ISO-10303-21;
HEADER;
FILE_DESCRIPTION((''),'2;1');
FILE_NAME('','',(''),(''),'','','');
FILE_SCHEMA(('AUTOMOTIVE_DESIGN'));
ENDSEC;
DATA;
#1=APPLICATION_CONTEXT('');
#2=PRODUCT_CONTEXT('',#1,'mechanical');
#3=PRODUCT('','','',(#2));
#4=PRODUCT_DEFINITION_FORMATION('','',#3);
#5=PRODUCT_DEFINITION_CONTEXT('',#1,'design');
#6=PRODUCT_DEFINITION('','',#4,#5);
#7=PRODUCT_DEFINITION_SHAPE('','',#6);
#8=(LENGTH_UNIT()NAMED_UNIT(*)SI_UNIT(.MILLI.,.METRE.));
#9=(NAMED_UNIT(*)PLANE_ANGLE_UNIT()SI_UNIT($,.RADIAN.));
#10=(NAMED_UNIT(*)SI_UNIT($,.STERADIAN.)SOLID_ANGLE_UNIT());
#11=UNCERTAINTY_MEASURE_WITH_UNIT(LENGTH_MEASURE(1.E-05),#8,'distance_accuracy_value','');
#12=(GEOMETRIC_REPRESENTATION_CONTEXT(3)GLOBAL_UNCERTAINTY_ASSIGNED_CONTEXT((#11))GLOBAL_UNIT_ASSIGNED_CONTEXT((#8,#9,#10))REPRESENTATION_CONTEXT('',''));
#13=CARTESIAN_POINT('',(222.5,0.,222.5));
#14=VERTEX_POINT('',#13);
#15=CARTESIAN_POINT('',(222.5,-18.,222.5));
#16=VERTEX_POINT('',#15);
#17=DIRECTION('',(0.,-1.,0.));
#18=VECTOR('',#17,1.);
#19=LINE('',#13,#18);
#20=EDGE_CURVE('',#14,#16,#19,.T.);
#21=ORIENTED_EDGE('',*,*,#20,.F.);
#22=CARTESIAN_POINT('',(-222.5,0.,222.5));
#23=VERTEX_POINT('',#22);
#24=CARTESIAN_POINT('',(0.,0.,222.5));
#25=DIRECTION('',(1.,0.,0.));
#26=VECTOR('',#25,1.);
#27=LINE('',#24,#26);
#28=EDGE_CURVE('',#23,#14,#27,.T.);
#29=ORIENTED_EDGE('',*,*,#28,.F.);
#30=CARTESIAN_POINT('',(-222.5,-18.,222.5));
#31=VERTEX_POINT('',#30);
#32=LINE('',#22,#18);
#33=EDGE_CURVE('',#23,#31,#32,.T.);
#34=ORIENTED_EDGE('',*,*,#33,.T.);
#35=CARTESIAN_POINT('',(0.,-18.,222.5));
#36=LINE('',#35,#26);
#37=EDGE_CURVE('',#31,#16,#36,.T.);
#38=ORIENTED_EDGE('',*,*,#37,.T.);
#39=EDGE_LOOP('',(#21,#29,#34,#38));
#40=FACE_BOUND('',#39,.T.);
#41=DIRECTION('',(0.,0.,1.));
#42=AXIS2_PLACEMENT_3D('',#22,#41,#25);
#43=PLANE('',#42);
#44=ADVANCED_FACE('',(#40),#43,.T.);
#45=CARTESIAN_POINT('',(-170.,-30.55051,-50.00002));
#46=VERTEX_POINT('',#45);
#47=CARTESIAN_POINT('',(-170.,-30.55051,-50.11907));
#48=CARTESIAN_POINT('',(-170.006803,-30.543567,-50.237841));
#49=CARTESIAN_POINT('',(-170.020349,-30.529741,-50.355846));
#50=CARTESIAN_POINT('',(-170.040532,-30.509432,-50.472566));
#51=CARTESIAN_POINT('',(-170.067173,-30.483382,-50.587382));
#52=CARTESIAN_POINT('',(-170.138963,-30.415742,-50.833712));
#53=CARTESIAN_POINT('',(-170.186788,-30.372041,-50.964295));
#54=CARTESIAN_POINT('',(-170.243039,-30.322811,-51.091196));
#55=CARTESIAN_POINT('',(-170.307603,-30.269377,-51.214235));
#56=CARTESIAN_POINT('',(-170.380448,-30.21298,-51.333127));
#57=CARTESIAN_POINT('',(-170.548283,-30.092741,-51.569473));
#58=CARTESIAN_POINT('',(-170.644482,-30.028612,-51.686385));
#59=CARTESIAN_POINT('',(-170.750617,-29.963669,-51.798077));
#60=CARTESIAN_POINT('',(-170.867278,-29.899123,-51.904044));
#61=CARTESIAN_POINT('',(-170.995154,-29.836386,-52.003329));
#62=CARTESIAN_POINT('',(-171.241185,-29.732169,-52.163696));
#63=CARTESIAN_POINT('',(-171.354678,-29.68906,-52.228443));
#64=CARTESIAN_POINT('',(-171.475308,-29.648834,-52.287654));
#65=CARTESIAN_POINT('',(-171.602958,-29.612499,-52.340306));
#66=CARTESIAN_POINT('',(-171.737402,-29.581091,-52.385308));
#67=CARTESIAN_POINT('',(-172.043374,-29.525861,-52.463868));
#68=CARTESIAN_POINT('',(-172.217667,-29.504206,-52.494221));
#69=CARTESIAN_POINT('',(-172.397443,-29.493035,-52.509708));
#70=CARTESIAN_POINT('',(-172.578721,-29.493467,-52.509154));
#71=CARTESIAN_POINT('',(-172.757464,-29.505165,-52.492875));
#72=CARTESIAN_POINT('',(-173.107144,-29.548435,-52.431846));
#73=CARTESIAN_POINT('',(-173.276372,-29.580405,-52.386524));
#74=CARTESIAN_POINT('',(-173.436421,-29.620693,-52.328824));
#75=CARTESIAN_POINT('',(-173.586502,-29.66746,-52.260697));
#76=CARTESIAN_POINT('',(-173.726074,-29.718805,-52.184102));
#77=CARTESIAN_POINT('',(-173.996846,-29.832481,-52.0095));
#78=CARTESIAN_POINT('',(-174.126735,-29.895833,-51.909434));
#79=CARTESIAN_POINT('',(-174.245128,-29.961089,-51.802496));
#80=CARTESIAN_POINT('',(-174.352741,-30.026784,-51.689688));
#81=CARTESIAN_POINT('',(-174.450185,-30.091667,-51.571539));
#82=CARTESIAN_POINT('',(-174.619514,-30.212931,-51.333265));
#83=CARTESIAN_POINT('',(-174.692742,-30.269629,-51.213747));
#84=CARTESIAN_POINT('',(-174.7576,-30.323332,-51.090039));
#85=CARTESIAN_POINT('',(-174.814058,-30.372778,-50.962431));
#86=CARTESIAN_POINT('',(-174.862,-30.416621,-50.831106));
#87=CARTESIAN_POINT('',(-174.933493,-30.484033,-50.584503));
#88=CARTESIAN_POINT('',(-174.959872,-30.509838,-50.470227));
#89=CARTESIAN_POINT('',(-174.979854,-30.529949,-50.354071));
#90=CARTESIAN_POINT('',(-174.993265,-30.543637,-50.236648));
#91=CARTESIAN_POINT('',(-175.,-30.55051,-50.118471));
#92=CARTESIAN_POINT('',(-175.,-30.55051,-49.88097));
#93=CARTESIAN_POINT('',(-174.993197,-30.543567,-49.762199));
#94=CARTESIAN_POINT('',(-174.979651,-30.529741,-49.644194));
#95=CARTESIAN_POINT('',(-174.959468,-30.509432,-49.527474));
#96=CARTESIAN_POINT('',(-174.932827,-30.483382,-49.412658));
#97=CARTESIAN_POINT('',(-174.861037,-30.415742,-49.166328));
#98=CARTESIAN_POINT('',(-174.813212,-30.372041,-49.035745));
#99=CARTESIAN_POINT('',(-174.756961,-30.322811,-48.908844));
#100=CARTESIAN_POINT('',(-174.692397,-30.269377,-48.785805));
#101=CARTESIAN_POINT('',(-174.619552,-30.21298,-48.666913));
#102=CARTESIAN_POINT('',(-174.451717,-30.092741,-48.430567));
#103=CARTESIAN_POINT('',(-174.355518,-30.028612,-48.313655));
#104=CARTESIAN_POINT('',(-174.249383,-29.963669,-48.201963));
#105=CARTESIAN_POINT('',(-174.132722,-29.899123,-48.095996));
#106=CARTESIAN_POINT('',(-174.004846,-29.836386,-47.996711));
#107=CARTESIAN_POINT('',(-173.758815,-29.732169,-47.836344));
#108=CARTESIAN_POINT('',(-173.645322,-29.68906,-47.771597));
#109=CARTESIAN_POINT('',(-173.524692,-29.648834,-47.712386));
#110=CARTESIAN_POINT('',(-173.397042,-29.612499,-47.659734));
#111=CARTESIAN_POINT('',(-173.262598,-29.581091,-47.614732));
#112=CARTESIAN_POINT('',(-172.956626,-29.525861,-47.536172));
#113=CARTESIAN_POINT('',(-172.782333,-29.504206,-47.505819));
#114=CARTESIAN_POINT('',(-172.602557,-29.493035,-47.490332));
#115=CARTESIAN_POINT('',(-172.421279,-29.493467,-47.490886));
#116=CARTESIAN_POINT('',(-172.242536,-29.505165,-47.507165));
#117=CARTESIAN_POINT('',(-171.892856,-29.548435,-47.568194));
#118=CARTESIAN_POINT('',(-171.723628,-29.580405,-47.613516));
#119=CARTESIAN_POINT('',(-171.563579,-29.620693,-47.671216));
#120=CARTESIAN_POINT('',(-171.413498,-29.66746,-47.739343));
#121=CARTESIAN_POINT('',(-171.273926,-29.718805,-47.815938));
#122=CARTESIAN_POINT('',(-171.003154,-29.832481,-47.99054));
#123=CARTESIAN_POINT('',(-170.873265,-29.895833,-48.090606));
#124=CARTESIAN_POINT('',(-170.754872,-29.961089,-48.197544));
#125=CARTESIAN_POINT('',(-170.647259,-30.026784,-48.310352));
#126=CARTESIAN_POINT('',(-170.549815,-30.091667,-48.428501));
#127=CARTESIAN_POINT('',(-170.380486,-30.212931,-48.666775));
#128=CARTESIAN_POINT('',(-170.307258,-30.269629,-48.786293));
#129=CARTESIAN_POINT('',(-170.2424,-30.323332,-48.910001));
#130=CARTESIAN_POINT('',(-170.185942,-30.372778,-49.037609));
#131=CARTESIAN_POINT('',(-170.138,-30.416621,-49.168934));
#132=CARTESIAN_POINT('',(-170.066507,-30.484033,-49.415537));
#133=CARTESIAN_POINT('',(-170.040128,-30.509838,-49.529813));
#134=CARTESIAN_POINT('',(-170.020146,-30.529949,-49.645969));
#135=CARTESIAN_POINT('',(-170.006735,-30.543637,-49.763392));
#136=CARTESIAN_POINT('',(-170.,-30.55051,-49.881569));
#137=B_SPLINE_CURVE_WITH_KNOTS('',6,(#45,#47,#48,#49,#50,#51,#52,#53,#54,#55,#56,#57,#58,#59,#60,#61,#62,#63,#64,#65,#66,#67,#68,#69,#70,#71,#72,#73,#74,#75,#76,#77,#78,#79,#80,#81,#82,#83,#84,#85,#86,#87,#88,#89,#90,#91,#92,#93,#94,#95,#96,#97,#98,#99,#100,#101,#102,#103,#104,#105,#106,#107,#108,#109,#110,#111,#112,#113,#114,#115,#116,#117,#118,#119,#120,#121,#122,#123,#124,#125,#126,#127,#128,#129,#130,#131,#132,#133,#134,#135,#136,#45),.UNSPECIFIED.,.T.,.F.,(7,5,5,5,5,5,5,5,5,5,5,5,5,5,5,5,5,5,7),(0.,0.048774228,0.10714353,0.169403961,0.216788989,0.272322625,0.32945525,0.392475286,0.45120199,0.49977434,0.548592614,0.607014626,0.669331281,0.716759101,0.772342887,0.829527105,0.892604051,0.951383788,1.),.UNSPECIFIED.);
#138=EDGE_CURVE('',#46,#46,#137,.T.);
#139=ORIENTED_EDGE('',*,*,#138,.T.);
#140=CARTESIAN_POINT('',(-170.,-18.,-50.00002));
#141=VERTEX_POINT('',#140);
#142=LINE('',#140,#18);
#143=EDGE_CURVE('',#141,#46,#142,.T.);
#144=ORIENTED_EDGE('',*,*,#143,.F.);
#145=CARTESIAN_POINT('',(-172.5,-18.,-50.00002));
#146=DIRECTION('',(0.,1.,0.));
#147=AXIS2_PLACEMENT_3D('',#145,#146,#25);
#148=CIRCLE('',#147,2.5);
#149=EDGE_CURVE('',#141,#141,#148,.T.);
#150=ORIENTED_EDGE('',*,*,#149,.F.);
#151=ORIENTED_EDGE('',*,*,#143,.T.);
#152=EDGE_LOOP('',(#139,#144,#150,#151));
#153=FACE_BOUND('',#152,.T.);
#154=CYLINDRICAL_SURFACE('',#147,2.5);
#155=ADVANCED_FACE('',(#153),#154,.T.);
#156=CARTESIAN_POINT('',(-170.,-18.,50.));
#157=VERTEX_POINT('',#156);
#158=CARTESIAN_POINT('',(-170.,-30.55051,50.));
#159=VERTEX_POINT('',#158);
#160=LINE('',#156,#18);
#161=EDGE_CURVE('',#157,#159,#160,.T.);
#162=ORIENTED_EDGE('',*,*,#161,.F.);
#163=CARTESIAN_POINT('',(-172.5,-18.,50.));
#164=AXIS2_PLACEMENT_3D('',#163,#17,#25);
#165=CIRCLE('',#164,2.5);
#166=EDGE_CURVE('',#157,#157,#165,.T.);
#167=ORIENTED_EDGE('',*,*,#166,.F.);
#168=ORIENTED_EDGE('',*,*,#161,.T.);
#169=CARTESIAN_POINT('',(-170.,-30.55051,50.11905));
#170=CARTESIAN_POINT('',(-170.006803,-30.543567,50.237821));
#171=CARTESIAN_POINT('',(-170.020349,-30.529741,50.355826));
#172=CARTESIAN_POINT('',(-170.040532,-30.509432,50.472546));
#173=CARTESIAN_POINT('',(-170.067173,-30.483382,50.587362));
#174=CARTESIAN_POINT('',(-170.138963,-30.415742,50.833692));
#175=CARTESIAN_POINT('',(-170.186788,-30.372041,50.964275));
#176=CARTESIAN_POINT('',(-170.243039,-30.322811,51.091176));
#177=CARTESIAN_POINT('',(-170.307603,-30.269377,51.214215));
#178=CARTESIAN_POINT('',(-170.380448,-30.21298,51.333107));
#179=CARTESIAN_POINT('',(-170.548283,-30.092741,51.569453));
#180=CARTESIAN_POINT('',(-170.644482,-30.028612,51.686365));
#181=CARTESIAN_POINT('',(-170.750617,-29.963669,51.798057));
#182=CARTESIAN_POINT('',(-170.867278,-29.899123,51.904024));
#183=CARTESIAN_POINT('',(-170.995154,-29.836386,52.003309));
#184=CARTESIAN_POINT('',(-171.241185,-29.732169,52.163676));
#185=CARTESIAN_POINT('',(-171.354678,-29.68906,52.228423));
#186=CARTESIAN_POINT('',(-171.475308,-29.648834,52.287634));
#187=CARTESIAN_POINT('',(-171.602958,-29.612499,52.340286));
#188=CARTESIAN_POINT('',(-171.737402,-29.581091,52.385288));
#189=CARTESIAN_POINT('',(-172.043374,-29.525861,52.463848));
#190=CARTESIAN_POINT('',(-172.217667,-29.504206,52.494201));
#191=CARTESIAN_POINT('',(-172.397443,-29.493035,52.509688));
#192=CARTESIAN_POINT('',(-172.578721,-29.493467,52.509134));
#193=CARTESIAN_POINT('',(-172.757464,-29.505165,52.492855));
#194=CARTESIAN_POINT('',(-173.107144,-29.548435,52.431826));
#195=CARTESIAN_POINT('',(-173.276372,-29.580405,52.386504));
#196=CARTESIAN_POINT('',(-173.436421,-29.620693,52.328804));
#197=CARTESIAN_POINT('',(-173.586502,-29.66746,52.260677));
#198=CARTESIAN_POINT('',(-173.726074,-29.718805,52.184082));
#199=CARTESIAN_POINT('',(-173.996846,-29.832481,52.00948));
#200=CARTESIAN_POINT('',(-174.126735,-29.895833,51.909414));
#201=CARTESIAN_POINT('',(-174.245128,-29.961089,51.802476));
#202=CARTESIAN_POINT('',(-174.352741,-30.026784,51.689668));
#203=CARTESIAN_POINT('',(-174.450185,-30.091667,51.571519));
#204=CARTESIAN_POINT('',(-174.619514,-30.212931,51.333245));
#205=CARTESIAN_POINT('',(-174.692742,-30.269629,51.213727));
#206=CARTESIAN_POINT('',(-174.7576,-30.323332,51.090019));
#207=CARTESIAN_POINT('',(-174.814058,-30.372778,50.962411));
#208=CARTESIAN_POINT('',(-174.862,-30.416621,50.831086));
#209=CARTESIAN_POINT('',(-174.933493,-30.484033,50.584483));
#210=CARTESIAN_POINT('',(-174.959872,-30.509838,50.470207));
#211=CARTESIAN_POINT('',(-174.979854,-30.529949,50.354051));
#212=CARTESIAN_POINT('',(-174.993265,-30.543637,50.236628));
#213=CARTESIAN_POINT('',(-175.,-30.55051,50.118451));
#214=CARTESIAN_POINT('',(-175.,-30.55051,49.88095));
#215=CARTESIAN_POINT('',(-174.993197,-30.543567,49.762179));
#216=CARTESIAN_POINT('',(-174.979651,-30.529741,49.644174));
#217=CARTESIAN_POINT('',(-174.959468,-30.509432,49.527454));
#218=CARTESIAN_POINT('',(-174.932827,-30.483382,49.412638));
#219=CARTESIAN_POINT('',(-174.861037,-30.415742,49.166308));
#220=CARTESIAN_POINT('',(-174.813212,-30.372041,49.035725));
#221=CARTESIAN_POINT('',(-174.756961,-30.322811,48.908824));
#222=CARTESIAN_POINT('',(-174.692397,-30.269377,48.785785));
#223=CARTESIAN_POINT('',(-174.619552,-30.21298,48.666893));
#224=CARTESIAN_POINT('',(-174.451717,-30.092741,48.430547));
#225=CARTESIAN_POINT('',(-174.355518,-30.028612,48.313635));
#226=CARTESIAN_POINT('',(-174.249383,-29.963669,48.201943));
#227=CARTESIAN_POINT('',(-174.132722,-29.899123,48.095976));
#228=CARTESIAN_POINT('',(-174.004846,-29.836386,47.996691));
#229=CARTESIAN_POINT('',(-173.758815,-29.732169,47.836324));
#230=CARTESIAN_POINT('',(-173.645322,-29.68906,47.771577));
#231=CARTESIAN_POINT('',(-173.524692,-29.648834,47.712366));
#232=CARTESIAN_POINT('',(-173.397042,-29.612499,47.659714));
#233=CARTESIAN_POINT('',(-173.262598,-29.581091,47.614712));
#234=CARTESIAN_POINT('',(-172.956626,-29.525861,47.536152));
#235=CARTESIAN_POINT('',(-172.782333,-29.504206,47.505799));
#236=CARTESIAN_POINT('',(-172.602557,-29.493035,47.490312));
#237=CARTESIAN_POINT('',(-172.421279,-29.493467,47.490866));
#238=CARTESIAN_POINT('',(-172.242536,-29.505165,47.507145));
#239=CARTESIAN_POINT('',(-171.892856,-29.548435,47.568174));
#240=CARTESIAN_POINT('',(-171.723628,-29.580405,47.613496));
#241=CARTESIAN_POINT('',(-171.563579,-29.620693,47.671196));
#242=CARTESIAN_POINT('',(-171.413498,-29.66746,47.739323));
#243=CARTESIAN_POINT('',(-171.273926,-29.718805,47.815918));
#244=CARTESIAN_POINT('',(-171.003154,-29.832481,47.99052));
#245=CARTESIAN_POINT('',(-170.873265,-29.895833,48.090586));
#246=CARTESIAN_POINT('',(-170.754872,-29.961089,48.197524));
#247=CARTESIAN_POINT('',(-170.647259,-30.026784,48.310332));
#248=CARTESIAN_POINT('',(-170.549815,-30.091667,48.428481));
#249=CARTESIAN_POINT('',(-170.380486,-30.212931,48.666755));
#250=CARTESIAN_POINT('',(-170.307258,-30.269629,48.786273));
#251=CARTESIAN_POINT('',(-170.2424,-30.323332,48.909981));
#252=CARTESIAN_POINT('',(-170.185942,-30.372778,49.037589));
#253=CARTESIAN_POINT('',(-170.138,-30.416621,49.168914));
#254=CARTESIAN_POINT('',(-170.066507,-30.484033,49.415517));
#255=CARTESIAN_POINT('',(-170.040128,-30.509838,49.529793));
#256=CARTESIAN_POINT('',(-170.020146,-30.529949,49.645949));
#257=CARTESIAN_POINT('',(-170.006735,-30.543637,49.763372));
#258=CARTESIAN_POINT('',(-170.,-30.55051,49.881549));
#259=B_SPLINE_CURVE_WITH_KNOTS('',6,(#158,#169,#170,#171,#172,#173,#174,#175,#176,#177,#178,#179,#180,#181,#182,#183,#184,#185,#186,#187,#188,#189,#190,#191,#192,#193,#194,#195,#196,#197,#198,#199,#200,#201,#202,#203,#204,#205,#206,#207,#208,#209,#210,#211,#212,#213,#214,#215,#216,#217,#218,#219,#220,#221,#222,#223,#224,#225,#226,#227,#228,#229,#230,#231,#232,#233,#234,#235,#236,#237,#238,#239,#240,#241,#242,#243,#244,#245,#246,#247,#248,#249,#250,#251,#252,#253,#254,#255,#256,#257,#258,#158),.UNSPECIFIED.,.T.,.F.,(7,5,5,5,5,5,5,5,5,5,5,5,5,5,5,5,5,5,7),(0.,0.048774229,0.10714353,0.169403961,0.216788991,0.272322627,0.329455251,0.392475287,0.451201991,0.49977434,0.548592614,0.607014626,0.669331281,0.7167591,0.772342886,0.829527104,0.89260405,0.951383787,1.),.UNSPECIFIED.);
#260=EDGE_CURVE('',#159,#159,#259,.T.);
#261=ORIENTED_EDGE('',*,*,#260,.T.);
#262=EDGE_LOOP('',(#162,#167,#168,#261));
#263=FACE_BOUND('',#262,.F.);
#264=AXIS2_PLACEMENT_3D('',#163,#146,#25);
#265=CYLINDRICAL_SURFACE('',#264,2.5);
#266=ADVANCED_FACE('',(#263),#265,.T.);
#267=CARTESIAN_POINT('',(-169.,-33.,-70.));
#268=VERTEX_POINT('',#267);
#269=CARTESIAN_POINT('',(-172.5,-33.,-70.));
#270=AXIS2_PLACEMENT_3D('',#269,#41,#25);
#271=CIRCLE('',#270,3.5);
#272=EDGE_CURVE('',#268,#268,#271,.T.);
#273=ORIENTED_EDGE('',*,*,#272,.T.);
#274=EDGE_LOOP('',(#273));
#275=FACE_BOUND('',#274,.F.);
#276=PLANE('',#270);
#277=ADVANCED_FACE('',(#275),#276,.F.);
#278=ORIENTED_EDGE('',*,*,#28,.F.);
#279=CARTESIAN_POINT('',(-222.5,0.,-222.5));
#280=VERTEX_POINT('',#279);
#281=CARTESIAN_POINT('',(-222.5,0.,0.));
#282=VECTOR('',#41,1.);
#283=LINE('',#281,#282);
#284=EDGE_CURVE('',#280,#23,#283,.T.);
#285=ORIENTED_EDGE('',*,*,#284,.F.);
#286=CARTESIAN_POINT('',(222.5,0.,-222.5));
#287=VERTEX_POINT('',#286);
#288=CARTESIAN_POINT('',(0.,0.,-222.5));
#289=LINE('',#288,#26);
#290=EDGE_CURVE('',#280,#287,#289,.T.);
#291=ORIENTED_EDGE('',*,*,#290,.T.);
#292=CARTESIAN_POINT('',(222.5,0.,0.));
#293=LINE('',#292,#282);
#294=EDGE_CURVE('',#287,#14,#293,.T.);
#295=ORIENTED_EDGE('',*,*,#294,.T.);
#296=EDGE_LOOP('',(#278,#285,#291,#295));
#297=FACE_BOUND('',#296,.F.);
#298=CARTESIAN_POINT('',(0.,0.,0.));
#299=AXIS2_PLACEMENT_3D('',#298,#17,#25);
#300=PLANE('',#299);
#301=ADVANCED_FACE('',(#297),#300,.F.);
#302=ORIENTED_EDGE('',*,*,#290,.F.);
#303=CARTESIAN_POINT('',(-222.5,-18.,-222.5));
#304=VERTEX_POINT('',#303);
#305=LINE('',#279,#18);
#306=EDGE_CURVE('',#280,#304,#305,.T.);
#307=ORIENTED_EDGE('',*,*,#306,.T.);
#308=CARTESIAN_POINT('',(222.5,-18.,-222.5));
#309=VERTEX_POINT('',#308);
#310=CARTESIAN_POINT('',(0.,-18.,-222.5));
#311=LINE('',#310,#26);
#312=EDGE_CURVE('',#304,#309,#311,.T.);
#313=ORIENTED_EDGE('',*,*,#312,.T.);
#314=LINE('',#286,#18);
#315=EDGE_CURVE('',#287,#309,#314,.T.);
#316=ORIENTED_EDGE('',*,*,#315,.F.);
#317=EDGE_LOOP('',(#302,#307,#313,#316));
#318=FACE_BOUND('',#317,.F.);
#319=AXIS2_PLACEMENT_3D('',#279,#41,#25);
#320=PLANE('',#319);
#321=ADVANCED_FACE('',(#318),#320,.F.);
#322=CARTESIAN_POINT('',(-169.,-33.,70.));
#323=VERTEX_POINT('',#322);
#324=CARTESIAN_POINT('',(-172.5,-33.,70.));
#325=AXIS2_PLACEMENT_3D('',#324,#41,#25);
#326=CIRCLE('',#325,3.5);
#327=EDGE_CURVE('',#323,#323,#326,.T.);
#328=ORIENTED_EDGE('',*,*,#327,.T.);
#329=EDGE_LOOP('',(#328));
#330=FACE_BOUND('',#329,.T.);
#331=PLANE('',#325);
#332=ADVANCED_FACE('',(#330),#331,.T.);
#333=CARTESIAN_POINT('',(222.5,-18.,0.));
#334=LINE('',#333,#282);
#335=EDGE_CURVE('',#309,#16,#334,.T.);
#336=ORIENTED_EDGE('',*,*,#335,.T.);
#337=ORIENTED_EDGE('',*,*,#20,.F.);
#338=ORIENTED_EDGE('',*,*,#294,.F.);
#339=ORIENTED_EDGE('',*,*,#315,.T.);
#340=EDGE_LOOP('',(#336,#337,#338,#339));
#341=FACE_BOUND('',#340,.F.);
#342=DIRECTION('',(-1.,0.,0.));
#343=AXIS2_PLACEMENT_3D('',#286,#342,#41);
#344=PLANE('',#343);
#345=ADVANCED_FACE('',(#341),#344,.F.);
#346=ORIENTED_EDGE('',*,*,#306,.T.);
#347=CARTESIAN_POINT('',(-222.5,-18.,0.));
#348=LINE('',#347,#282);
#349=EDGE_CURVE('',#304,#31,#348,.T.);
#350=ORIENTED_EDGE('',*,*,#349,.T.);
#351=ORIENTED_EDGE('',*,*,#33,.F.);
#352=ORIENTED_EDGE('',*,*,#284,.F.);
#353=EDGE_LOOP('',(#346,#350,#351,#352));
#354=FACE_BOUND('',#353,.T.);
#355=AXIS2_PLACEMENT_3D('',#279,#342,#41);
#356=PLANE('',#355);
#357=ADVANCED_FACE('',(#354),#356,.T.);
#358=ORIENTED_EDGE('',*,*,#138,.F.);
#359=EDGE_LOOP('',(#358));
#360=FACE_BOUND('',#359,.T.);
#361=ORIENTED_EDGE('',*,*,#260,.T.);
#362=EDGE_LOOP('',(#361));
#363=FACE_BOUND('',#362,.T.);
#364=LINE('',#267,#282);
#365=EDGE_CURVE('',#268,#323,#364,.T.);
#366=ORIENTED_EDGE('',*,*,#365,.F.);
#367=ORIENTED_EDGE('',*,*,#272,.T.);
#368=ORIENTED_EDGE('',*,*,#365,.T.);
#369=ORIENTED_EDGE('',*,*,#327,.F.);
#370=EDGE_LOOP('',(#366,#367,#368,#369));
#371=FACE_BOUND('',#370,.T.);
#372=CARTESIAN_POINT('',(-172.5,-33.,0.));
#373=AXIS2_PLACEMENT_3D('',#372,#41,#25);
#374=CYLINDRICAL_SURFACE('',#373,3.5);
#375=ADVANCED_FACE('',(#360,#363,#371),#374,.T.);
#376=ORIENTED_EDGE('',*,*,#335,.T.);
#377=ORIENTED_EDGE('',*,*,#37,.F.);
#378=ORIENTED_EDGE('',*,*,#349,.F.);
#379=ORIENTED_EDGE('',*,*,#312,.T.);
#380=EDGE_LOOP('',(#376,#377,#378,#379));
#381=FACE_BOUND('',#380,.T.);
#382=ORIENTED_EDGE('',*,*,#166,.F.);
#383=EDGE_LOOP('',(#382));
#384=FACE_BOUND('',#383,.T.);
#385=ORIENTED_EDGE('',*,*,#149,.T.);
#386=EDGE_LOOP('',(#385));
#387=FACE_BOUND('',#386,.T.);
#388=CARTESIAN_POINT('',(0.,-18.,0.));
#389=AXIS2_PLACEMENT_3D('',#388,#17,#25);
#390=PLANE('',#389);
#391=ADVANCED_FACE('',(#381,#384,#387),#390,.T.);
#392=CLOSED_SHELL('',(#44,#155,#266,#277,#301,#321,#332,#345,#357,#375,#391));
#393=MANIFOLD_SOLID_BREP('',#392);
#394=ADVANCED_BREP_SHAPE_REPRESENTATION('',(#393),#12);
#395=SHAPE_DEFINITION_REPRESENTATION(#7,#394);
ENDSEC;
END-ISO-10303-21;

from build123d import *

# Parameters (mm, degrees)
F0_W     = 445
F0_H     = 445
F1_DEPTH = 18
F2_R     = 2.5
F3_DEPTH = 15
F4_R     = 3.5
F5_DEPTH = 70


# Not quite as in the source:
# - a pattern or mirror of a feature is missing from the dataset's text; its kind, count and spacing are read off the source's solid


with BuildPart() as f1:
    # F0 (on Front) → F1 (new body)
    with BuildSketch(Plane.XZ):
        Rectangle(F0_W, F0_H)
    extrude(amount=F1_DEPTH)

    # F2 (on face) → F3 (join)
    with BuildSketch(Plane.XZ.offset(18)):
        with Locations((-172.5, 50)):
            Circle(F2_R)
    f3 = extrude(amount=F3_DEPTH)

    # F3_copies: F3 across plane
    add(f3.mirror(Plane(origin=(0, 0, -1e-05), x_dir=(-1, 0, 0), z_dir=(0, 0, -1))))

    # F4 (on Top) → F5 (join, symmetric)
    with BuildSketch(Plane.XY):
        with Locations((-172.5, -33)):
            Circle(F4_R)
    extrude(amount=F5_DEPTH, both=True)


solid = f1.part
